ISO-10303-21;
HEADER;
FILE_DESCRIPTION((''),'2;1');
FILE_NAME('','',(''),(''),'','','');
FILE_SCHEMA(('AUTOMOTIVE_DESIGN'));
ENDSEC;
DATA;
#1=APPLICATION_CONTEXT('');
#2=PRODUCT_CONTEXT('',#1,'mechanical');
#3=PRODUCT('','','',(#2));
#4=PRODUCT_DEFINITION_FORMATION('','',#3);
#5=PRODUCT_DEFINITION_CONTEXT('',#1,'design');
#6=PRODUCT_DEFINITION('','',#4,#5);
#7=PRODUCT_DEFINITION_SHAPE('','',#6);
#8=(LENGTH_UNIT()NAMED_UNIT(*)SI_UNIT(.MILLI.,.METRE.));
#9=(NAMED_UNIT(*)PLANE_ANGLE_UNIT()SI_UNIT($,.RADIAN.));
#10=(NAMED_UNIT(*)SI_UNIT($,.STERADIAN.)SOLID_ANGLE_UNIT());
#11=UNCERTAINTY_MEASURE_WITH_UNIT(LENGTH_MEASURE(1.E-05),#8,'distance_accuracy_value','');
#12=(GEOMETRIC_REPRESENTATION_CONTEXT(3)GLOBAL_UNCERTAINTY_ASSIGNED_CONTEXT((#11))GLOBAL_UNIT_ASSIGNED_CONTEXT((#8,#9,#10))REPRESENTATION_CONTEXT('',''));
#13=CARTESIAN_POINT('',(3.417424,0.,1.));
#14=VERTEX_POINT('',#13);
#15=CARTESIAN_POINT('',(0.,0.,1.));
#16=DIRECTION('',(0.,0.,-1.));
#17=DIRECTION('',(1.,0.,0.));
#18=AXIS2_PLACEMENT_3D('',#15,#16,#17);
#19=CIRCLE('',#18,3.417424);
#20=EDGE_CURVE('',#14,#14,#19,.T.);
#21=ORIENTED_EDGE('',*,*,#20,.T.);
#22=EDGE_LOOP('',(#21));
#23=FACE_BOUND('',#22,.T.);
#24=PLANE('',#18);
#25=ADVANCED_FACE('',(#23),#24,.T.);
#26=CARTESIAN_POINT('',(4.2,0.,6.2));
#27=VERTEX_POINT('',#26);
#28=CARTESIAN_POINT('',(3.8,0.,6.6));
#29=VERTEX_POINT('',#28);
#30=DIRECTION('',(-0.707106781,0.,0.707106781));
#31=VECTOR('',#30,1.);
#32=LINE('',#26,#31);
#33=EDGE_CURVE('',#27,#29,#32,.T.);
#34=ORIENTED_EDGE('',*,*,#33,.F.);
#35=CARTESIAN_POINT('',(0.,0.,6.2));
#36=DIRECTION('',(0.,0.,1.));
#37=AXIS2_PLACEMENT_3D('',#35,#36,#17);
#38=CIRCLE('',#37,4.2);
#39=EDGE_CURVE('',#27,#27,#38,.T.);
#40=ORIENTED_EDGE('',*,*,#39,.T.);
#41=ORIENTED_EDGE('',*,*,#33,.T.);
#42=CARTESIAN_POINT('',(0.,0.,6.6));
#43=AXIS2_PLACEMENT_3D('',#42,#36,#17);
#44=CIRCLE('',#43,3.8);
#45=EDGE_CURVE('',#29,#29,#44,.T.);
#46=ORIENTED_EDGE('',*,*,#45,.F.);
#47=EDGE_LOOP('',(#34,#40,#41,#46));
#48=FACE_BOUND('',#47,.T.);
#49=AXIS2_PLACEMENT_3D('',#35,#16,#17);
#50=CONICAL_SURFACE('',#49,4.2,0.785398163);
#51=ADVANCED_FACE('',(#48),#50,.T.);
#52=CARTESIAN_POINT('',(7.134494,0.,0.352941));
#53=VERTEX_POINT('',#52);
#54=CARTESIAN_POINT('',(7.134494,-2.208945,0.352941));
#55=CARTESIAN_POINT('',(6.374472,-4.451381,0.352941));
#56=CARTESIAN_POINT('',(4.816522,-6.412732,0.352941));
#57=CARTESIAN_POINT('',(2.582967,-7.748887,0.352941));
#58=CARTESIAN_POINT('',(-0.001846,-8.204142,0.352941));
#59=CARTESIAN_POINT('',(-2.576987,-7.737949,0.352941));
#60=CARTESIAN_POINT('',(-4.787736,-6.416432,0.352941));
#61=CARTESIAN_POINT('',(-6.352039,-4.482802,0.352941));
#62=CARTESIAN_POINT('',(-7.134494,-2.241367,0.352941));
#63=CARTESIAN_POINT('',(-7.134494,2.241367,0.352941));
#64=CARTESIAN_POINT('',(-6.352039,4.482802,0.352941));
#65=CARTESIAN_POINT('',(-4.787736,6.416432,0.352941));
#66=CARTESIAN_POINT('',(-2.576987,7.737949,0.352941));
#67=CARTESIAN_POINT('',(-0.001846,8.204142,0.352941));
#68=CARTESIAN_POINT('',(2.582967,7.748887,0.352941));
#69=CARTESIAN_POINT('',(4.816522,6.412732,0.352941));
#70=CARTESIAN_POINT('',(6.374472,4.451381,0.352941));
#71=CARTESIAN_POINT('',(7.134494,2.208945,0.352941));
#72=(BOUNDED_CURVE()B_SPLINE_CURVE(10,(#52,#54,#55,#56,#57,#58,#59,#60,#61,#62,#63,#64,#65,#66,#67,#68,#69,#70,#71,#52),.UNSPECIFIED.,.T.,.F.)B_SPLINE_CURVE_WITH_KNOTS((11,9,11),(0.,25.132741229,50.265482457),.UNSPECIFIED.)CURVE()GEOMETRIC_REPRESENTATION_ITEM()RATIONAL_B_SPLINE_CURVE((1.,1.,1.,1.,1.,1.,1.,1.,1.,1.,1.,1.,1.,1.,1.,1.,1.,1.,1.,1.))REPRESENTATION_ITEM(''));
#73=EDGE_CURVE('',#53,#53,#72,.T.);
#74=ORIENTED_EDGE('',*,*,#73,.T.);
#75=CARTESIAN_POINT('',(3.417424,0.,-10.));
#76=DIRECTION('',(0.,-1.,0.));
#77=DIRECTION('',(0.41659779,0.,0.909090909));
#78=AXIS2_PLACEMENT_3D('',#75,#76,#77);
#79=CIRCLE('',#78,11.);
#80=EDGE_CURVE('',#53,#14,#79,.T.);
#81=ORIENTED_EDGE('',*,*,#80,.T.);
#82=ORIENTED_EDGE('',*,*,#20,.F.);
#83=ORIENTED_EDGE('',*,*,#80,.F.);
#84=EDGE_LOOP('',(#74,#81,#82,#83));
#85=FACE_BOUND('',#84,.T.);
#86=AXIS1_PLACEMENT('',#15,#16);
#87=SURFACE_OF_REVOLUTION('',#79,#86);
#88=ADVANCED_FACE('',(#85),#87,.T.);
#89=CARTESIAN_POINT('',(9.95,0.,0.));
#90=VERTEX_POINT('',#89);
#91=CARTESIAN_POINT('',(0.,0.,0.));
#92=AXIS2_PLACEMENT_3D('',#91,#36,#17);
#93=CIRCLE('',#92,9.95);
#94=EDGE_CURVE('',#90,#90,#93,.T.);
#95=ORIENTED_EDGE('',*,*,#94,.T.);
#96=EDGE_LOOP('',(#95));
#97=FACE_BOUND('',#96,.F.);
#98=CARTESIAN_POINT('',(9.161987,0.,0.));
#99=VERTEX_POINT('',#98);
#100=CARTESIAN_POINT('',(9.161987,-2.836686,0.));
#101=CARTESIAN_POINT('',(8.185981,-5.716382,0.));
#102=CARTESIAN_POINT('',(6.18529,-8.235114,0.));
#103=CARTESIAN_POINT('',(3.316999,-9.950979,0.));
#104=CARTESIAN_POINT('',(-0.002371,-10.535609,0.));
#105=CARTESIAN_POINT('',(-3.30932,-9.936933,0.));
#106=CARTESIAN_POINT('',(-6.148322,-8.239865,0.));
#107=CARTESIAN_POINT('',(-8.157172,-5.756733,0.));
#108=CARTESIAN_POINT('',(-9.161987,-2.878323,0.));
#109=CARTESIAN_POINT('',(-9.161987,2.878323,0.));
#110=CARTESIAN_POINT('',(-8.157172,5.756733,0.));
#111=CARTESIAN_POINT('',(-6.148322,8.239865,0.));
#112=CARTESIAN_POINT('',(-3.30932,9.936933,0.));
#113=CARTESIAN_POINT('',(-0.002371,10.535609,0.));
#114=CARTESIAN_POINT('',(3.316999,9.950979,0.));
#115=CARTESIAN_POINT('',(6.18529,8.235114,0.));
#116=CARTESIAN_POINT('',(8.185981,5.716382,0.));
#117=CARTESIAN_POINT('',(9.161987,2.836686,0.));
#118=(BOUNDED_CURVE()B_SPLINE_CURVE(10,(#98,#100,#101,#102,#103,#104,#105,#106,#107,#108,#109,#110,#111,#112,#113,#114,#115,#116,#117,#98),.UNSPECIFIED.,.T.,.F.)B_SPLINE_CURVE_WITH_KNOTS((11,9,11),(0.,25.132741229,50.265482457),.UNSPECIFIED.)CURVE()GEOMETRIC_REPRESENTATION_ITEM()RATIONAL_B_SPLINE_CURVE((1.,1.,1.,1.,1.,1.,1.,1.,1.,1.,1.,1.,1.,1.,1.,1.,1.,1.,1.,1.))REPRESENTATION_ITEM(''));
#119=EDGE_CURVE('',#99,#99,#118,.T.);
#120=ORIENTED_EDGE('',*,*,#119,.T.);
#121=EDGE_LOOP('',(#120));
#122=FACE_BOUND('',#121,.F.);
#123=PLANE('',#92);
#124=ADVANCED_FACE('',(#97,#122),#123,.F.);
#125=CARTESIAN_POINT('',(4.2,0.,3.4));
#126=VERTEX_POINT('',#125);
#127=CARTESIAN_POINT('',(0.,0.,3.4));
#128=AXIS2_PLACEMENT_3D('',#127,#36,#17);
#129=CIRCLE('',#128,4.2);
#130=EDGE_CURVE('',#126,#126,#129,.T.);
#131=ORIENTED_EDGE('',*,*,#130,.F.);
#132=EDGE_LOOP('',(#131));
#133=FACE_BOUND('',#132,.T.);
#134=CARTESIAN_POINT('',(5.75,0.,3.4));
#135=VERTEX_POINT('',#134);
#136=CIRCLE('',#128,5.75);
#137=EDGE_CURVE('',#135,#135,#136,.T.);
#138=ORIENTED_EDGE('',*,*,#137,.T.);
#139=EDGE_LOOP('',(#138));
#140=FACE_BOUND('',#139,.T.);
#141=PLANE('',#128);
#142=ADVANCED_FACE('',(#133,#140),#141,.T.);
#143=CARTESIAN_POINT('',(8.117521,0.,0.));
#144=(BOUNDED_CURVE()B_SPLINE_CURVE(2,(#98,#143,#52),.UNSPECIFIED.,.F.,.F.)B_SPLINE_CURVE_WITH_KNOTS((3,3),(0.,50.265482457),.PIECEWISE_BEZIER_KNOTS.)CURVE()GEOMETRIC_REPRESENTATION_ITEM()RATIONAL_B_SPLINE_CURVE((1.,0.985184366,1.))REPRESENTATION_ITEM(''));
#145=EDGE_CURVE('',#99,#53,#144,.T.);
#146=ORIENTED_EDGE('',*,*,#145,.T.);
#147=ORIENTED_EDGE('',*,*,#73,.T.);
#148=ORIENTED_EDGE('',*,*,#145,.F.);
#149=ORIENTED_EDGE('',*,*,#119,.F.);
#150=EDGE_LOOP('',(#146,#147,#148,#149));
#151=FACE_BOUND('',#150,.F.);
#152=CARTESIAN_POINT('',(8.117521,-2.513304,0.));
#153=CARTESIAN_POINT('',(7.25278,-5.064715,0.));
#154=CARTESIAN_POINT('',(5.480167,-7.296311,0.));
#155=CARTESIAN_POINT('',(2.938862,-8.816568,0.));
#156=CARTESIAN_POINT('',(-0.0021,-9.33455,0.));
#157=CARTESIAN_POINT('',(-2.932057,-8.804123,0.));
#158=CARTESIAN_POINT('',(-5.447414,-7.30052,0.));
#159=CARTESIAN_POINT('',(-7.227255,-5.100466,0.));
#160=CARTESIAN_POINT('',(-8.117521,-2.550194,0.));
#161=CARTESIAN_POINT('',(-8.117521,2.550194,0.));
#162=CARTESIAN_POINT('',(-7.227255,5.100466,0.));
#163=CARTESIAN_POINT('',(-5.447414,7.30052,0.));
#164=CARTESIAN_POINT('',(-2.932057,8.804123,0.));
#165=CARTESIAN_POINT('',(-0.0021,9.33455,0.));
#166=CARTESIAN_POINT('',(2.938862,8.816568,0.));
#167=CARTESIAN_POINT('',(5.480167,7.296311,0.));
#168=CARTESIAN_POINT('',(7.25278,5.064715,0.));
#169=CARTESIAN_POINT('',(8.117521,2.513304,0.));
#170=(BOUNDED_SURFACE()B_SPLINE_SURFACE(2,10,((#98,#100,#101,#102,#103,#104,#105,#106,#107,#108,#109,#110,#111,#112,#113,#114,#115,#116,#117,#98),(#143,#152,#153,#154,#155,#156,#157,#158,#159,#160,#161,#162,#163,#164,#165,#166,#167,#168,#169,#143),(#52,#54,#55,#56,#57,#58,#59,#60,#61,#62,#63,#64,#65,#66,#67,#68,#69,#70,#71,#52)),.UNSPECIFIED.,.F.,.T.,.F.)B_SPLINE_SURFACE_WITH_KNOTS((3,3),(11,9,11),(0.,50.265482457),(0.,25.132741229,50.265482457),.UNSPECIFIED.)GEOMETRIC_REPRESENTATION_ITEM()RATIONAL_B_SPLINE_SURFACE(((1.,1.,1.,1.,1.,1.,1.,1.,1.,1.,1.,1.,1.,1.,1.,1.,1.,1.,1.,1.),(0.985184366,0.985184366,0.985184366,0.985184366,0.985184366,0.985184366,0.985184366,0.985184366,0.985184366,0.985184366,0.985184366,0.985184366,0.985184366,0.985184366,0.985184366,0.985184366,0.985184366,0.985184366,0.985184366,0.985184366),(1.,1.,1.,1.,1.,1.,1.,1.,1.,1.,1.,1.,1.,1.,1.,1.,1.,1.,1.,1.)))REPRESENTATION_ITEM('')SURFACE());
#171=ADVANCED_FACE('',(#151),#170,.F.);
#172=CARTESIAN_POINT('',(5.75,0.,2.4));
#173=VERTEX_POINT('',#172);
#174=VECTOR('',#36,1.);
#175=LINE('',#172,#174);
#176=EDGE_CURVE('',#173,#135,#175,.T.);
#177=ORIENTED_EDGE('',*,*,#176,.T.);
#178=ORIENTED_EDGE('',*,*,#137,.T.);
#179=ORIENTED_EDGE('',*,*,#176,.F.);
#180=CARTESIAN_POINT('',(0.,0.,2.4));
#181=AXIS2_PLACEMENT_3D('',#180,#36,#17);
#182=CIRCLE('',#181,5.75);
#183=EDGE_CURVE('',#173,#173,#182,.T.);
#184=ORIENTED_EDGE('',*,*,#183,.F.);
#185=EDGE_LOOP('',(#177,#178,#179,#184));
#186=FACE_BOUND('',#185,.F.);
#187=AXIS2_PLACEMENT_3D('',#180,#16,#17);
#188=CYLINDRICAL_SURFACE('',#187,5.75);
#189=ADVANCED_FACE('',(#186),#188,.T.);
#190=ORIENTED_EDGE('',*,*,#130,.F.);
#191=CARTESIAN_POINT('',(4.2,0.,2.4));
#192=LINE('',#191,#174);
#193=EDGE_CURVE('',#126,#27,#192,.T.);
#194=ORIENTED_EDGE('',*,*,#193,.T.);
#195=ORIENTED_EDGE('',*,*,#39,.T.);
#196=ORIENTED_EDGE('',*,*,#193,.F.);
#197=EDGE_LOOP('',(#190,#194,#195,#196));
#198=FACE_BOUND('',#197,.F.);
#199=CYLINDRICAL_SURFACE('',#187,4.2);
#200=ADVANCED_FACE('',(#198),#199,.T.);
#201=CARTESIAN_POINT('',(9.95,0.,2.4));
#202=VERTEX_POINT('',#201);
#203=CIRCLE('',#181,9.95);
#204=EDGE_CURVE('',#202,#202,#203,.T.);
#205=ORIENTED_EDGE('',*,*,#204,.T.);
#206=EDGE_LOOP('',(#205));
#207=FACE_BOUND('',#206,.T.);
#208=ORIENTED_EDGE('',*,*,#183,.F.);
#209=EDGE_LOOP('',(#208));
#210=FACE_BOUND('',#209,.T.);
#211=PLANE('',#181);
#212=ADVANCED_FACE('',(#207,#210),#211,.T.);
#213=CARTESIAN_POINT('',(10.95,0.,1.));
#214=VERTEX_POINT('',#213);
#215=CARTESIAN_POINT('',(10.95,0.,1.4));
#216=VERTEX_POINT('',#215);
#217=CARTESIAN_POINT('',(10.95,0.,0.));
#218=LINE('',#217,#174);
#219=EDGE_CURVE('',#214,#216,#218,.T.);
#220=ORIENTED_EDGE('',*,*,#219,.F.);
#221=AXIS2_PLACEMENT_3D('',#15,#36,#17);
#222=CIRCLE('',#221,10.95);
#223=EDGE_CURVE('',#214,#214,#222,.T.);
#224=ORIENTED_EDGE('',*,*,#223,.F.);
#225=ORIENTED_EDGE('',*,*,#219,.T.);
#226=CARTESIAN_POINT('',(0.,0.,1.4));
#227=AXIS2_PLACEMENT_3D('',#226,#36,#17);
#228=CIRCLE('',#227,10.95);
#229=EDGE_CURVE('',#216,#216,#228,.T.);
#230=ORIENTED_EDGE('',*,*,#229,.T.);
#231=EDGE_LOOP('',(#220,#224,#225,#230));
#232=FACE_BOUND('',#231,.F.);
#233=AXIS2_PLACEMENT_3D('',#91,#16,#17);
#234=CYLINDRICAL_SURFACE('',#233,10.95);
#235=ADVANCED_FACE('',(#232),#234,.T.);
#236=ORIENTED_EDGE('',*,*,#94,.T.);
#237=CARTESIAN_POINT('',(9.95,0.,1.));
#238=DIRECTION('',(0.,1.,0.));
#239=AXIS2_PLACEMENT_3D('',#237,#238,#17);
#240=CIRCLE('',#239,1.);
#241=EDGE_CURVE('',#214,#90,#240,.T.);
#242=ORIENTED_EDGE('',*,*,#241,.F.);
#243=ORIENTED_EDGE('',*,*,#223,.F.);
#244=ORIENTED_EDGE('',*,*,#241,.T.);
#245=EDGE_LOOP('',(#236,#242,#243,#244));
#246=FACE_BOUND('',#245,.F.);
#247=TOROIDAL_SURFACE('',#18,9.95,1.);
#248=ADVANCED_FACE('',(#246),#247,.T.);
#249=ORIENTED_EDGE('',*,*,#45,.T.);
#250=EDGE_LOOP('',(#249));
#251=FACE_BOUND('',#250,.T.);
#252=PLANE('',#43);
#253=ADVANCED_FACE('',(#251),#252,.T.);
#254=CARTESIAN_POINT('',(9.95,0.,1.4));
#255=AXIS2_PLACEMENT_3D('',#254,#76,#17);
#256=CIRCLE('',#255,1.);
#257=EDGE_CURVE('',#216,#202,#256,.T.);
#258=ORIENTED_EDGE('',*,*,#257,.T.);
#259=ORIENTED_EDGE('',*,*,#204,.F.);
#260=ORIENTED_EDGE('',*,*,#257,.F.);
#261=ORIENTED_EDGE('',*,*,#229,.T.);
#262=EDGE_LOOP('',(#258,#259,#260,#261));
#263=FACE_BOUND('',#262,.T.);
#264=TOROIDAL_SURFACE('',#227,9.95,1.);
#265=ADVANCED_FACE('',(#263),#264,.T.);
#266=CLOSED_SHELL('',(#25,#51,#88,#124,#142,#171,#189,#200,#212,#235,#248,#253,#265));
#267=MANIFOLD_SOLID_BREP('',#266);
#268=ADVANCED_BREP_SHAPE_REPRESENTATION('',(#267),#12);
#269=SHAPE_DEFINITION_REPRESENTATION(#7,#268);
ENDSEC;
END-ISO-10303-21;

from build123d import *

# Parameters (mm, degrees)
F0_R     = 10.95
F1_DEPTH = 2.4
F2_R     = 4.2
F3_DEPTH = 4.2
F4_R     = 1
F5_R     = 5.75
F5_R_2   = 4.2
F6_DEPTH = 1
F7_R     = 1
F8_R     = 8
F9_DEPTH = 1
F11_SIZE = 0.4
F12_R    = 6


# Not quite as in the source:
# - a fillet or chamfer that OpenCascade refuses, or shapes differently, is made with other operations: its cross-section is extruded or revolved along the edge and cut away or added


with BuildPart() as f1:
    # F0 (on Top) → F1 (new body)
    with BuildSketch(Plane.XY):
        Circle(F0_R)
    extrude(amount=F1_DEPTH)

    # F2 (on face) → F3 (join)
    with BuildSketch(Plane.XY.offset(2.4)):
        Circle(F2_R)
    extrude(amount=F3_DEPTH)

    # F4
    f4_edges = [f1.edges().sort_by_distance(p)[0] for p in [
        (-10.95, 0, 2.4),
    ]]
    fillet(f4_edges, radius=F4_R)

    # F5 (on face) → F6 (join)
    with BuildSketch(Plane.XY.offset(2.4)):
        Circle(F5_R)
        Circle(F5_R_2, mode=Mode.SUBTRACT)
    extrude(amount=F6_DEPTH)

    # F7
    f7_edges = [f1.edges().sort_by_distance(p)[0] for p in [
        (-10.95, 0, 0),
    ]]
    fillet(f7_edges, radius=F7_R)

    # F8 (on face) → F9 (cut)
    with BuildSketch(Plane(origin=(0, 0, 0), x_dir=(1, 0, 0), z_dir=(0, 0, -1))):
        Circle(F8_R)
    extrude(amount=-F9_DEPTH, mode=Mode.SUBTRACT)

    # F10: fillet of radius 11 on 1 edges, made by hand

    # F10_s1 → F10_t2 (revolve)
    with BuildSketch(Plane.XZ):
        with BuildLine():
            ThreePointArc((8, 0), (5.762632185, 0.7470926301), (3.417424305, 1))
            Line((3.417424305, 1), (8, 1))
            Line((8, 1), (8, 0))
        make_face()
    revolve(axis=Axis((0, 0, 1), (0, 0, -1)))

    # F11
    f11_edges = [f1.edges().sort_by_distance(p)[0] for p in [
        (-4.2, 0, 6.6),
    ]]
    chamfer(f11_edges, length=F11_SIZE)

    # F12
    f12_edges = [f1.edges().sort_by_distance(p)[0] for p in [
        (-8, 0, 0),
    ]]
    fillet(f12_edges, radius=F12_R)


solid = f1.part
